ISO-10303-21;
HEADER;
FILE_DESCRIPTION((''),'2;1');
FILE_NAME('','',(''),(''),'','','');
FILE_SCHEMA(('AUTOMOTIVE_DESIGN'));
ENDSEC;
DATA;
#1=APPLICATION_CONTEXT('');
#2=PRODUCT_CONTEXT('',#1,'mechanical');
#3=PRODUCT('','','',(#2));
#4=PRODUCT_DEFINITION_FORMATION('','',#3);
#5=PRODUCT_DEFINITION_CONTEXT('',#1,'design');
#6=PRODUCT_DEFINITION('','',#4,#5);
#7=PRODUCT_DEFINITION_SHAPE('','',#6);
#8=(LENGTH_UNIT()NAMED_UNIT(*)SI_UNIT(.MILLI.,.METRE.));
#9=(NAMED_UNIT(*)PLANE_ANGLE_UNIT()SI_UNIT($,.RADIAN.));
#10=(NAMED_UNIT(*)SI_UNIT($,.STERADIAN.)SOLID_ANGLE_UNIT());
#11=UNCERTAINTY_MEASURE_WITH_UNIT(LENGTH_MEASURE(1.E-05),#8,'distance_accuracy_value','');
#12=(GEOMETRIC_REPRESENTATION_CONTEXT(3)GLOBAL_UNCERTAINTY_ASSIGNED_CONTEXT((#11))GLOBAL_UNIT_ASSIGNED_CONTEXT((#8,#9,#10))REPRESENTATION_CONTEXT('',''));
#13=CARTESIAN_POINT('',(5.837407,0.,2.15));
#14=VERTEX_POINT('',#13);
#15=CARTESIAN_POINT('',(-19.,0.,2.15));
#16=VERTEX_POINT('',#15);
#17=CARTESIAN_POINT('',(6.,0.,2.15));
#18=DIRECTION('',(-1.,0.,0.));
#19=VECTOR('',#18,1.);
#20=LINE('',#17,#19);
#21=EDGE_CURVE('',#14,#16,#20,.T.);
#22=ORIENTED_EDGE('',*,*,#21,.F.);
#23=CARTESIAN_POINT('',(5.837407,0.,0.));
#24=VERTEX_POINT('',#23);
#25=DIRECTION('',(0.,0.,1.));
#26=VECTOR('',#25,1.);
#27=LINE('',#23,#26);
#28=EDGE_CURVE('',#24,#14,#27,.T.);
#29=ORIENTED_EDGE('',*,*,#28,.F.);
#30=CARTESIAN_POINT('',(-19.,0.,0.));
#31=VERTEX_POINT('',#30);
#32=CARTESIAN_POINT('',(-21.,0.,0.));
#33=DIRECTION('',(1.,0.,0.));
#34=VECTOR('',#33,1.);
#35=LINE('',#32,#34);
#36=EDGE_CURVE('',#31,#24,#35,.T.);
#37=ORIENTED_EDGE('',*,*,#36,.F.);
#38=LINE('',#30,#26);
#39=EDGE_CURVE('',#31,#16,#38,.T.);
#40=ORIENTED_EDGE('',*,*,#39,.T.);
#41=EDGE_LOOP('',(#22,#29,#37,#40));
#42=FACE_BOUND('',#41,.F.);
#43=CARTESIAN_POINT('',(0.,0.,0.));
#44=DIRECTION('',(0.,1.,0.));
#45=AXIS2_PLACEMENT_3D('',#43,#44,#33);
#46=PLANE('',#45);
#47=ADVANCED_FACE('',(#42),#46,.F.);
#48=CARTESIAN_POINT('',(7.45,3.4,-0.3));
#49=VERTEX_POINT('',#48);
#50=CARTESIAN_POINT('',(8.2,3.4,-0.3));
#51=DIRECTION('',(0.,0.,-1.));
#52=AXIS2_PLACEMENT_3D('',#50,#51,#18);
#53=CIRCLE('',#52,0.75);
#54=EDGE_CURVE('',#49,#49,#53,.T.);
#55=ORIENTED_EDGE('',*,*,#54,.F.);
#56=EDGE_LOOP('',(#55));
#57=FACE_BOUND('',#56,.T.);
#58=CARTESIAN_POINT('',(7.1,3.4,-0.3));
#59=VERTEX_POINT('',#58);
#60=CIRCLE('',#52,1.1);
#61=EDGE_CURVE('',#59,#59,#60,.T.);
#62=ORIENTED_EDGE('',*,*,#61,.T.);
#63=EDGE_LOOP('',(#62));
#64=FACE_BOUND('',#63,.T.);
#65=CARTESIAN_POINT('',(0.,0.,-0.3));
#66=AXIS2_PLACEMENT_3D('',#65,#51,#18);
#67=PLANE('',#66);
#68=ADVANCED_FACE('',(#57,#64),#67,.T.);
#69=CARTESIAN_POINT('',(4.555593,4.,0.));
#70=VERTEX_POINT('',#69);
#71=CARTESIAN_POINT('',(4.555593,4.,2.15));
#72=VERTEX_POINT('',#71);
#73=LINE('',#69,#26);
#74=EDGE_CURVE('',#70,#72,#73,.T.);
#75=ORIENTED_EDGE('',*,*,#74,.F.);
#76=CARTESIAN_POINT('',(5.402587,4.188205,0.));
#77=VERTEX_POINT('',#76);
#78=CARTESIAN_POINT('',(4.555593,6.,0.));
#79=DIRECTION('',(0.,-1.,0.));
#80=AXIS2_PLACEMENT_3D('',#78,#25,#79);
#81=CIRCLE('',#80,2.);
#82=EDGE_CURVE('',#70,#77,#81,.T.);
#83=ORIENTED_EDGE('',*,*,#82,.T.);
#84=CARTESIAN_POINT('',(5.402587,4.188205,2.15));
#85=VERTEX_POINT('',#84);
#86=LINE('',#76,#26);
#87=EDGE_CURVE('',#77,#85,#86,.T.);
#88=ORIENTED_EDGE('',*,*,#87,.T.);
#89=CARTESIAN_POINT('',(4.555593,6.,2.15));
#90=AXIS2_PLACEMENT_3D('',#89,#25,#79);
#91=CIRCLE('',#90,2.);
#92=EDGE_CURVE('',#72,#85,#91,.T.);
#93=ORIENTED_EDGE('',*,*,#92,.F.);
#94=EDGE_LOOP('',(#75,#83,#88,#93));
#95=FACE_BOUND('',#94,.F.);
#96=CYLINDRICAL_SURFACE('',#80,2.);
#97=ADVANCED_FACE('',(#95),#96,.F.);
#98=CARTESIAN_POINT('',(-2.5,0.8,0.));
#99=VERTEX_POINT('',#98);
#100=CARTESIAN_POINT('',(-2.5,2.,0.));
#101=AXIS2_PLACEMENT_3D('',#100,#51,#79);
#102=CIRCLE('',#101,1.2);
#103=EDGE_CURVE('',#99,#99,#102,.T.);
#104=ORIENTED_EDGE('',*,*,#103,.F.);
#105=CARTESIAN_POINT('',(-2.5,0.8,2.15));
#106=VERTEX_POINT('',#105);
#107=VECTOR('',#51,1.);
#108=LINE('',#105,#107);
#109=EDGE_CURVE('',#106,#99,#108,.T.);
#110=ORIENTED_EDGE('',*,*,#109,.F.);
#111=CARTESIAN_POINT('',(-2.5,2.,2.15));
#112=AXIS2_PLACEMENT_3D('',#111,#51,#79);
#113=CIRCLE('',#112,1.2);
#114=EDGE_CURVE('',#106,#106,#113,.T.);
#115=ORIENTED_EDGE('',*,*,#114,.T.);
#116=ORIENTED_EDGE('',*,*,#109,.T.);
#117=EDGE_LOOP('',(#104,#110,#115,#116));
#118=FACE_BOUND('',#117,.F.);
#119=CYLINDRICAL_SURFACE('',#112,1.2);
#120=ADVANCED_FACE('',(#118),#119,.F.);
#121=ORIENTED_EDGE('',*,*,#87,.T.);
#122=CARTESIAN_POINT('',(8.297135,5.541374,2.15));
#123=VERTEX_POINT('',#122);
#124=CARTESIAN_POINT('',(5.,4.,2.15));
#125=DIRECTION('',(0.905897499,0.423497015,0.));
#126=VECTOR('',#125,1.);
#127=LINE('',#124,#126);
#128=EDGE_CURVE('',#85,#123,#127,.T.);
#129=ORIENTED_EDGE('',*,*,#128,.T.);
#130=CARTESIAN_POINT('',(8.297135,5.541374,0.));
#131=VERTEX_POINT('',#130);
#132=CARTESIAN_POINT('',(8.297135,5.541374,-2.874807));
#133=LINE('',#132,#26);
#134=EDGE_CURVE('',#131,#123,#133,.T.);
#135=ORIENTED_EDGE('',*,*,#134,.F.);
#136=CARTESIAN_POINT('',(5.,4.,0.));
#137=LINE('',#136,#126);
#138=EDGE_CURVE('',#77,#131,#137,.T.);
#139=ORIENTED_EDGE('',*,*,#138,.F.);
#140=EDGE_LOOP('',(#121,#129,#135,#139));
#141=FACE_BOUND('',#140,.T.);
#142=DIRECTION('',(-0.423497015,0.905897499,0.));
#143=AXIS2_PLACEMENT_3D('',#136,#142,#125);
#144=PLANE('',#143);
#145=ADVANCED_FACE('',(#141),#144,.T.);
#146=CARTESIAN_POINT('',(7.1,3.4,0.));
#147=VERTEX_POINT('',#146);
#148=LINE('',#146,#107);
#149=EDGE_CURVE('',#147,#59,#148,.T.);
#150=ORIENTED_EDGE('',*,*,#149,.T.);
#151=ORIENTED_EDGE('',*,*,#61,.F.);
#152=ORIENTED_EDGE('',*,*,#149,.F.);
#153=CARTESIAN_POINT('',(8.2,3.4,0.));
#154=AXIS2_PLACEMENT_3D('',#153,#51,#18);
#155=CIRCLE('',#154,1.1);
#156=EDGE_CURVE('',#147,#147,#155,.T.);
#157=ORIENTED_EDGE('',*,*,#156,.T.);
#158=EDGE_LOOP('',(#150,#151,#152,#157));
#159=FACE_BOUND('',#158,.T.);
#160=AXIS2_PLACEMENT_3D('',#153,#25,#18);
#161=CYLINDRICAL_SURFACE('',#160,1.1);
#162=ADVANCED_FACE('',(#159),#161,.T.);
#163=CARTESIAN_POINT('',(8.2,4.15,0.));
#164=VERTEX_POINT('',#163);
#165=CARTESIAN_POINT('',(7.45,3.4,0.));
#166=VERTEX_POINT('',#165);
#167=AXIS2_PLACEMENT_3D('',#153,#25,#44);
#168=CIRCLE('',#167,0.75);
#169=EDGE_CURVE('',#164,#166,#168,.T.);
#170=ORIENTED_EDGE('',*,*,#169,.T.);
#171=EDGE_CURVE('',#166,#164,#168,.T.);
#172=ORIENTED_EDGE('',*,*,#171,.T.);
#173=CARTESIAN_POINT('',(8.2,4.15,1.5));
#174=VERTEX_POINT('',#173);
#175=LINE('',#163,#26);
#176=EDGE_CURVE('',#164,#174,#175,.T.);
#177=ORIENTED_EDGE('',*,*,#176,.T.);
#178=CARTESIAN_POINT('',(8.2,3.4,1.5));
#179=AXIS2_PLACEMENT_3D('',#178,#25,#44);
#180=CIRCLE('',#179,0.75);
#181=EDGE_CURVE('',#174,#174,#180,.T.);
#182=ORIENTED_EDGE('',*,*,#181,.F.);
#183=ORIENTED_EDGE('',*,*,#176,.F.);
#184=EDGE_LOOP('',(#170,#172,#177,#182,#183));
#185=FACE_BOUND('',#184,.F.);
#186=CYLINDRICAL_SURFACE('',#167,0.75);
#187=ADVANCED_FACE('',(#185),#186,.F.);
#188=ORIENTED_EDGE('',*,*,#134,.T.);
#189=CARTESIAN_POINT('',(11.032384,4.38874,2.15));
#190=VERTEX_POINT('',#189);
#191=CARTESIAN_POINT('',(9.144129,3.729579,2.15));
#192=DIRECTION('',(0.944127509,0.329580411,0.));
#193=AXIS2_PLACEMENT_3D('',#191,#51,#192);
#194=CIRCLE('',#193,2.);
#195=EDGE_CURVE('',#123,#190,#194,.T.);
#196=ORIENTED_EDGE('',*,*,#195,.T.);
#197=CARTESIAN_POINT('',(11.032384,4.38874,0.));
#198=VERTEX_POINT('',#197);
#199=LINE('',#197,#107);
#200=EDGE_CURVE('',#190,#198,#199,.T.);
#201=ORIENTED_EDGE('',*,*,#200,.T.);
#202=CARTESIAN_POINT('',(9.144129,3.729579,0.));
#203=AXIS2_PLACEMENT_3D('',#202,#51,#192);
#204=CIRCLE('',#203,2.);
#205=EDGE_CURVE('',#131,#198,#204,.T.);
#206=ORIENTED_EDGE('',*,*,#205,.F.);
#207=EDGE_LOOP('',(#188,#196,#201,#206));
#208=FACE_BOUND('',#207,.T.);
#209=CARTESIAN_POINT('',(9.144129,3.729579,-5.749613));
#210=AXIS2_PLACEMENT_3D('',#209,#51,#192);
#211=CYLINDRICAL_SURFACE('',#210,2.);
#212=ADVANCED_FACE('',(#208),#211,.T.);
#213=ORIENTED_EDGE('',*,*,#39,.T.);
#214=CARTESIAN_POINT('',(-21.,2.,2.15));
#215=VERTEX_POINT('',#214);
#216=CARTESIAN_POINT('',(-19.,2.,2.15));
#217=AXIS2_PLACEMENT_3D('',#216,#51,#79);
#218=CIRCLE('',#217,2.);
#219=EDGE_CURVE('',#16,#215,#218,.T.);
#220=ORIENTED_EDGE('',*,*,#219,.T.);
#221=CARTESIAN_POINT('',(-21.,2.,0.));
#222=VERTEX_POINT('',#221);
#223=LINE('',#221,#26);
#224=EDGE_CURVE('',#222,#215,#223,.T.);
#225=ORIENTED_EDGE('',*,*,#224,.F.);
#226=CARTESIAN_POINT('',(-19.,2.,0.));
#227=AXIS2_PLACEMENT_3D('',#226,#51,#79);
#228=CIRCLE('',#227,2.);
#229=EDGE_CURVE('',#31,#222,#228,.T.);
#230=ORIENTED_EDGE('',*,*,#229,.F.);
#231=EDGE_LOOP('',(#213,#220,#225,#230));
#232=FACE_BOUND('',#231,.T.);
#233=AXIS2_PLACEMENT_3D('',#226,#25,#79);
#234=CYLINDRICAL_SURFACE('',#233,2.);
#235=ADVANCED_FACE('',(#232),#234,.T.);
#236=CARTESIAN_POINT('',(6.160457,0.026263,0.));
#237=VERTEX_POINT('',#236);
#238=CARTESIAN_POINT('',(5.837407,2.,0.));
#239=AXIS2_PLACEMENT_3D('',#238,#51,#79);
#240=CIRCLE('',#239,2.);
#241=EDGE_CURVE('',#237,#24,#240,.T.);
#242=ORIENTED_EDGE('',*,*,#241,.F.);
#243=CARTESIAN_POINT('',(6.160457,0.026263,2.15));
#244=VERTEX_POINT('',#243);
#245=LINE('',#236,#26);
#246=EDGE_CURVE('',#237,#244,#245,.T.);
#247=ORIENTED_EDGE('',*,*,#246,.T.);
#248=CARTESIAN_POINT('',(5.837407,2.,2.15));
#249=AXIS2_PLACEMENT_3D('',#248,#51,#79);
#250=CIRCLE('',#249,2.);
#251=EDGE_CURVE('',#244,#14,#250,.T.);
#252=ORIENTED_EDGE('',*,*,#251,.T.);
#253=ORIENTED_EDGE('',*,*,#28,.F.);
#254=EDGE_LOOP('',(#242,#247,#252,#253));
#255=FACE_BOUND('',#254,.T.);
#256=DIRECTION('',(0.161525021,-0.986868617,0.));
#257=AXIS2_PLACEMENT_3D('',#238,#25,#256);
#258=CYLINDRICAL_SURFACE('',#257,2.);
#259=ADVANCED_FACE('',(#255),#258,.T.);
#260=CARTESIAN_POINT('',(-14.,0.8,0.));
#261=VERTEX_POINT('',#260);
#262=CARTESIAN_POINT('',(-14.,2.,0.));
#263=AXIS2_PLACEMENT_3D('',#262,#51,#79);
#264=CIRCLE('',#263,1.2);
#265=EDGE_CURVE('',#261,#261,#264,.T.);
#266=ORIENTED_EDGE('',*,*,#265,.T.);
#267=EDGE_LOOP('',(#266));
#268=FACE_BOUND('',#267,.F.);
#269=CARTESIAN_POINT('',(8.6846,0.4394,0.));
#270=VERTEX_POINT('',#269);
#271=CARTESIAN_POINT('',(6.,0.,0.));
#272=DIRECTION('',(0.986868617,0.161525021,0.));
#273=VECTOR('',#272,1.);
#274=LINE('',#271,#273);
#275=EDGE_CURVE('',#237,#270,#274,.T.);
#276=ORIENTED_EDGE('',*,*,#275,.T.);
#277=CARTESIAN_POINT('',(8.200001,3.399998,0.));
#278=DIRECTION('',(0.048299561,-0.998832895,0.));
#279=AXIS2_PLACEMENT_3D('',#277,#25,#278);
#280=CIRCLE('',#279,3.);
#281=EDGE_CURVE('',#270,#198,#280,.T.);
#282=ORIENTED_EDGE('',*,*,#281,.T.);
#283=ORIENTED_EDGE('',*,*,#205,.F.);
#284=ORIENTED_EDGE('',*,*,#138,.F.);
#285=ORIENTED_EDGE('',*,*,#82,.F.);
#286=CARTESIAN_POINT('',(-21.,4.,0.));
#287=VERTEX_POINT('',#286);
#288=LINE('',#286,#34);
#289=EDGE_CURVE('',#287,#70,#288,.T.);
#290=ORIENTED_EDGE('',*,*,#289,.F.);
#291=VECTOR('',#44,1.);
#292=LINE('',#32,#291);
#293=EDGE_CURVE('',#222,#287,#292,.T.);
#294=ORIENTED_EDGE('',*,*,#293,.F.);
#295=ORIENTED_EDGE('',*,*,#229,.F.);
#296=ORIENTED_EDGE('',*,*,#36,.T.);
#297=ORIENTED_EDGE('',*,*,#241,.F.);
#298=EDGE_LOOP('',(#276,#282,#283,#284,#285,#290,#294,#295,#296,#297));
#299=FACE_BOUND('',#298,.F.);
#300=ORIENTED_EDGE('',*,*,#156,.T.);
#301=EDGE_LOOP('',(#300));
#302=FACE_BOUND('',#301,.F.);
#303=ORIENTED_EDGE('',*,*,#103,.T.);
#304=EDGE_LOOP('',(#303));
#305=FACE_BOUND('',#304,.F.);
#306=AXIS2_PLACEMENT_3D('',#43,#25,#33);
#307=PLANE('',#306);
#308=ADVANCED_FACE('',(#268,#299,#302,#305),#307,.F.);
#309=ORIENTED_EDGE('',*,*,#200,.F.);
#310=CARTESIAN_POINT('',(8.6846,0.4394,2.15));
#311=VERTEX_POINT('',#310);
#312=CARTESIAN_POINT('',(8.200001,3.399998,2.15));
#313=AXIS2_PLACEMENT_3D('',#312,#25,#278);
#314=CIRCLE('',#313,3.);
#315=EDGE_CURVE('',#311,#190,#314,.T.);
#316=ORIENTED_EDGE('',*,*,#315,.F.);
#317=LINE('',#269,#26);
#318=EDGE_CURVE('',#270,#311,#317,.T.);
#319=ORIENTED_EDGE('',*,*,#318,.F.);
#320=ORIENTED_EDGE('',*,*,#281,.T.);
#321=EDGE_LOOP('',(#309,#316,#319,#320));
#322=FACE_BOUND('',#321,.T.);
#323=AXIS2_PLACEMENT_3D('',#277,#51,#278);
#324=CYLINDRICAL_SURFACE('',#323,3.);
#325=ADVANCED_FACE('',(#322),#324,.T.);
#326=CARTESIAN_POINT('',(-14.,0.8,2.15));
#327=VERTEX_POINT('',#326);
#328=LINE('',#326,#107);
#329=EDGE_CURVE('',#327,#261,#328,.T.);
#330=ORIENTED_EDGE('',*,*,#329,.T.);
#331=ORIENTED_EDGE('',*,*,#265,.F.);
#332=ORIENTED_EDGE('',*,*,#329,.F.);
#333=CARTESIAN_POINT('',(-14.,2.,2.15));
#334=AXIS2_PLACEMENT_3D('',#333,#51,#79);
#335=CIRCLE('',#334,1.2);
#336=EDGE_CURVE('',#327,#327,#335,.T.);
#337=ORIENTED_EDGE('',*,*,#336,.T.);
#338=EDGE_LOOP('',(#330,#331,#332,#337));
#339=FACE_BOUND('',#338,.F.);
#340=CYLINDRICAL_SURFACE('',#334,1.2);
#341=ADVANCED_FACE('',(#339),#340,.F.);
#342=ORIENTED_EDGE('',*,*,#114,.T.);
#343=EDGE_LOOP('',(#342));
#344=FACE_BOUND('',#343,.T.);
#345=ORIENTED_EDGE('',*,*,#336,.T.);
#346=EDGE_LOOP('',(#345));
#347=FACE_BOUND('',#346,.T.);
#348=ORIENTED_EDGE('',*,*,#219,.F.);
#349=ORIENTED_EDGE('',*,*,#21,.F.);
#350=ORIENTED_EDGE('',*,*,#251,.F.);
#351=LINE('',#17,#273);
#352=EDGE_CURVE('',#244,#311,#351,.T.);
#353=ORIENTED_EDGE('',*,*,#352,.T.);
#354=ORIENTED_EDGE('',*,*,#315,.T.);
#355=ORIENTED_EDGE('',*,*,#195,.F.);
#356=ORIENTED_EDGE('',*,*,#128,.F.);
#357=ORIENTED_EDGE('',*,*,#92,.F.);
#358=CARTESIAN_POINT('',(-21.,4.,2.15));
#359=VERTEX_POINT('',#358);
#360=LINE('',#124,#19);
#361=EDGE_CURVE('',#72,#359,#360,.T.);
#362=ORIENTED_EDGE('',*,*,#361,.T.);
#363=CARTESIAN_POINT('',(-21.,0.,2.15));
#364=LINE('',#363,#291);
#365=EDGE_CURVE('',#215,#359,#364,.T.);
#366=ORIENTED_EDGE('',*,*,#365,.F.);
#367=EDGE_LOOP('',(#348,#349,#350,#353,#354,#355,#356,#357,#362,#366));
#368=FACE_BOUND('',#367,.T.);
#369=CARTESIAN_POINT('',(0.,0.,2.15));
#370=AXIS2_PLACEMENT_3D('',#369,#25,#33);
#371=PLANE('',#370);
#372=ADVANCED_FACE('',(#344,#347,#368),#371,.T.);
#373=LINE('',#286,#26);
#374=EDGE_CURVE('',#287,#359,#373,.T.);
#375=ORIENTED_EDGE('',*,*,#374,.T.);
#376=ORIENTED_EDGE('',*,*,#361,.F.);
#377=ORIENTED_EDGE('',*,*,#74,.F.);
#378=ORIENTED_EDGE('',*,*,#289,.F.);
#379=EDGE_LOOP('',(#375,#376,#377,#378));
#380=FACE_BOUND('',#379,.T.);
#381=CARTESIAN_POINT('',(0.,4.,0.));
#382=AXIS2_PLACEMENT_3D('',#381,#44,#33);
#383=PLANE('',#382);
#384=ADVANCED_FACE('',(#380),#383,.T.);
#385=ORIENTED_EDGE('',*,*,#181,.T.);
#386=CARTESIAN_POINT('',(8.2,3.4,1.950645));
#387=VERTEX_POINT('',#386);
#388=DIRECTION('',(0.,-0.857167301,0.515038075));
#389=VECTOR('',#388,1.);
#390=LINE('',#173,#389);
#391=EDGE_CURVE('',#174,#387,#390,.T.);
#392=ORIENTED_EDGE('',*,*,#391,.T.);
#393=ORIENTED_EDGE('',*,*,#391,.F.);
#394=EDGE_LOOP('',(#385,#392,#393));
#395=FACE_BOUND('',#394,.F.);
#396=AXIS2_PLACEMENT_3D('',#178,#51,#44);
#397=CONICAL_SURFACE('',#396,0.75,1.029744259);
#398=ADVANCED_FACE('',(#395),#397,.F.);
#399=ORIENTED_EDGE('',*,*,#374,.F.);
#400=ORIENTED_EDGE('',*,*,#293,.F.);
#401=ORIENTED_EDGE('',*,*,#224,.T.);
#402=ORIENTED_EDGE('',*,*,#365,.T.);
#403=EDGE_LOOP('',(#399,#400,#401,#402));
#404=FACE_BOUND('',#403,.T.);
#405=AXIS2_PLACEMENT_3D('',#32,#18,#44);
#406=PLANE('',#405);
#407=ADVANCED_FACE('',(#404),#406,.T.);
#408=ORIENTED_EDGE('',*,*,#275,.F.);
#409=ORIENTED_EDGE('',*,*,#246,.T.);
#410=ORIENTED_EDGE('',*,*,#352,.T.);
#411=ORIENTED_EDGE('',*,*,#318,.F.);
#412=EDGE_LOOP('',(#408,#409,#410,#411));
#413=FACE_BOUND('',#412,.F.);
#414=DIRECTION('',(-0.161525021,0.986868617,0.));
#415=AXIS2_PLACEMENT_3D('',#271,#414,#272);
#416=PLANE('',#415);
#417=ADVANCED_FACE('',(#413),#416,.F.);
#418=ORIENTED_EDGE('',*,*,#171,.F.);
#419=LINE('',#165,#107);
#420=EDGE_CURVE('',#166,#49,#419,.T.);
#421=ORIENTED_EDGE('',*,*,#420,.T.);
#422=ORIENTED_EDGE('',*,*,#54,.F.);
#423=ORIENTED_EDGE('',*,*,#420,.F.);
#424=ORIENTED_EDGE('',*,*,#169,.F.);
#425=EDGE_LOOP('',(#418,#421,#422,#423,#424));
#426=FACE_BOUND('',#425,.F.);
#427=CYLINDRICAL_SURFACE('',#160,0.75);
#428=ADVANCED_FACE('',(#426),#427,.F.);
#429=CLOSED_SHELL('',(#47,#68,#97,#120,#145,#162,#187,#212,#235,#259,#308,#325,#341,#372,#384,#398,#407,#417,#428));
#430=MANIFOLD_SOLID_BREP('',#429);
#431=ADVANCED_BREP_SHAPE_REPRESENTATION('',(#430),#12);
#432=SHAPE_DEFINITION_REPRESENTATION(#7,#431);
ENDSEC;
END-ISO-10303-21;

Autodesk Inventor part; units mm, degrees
ref_plane "YZ Plane" through (0, 0, 0) normal (1, 0, 0) x (0, 1, 0)
ref_plane "XZ Plane" through (0, 0, 0) normal (0, 1, 0) x (-1, 0, 0)
ref_plane "XY Plane" through (0, 0, 0) normal (0, 0, 1) x (1, 0, 0)
sketch "Sketch1" plane through (0, 0, 0) normal (0, 0, 1) x (1, 0, 0)
  line L0 (0, 4) -> (0, 0) construction
  arc A0 (8.3449, 0.4035) -> (9.5, 6.1037) centre (8.2, 3.4) ccw
  line L1 (0, 0) -> (-21, 0)
  line L2 (-21, 0) -> (-21, 4)
  line L3 (0, 4) -> (0, 0)
  line L4 (-21, 4) -> (0, 4)
  line L5 (0, 4) -> (5, 4)
  line L6 (5, 4) -> (9.5, 6.1037)
  line L7 (0, 0) -> (6, 0)
  line L8 (6, 0) -> (8.6846, 0.4394)
  dimension "d0" = 8.2
  dimension "d1" = 3.4
  dimension "d3" = 6
  dimension "d47" = 21
  dimension "d57" = 4
  dimension "d66" = 5
  dimension "d67" = 9.5
  dimension "d68" = 6
extrude "Extrusion1" add sketch "Sketch1" along normal blind 2.15
sketch "Sketch6" plane through (0, 0, 0) normal (0, 0, -1) x (-1, 0, 0)
  arc A0 (-9.5, 6.1037) -> (-8.6846, 0.4394) centre (-8.2, 3.4) ccw projected
  point P0 (0, 0)
  point P1 (-3.5529, 0.4208)
  point P2 (-8.8532, 6.2809)
  point P3 (-10.6507, 0.558)
hole "Hole3" at (8.2, 3.4, 0) direction (0, 0, 1) diameter 1.5 depth 1.5 tip angle 118
sketch "Sketch7" plane through (0, 0, 0) normal (0, 0, -1) x (-1, 0, 0)
  circle A0 centre (-8.2, 3.4) radius 0.75 projected
  circle A1 centre (-8.2, 3.4) radius 1.1
  point P0 (0, 0)
  dimension "d44" = 2.2
extrude "Extrusion4" add sketch "Sketch7" along normal blind 0.3
sketch "Sketch8" plane through (0, 0, 2.15) normal (0, 0, 1) x (1, 0, 0)
  arc A0 (8.6846, 0.4394) -> (9.5, 6.1037) centre (8.2, 3.4) ccw projected
  line L0 (-21, 4) -> (-21, 0) projected
  line L1 (-21, 4) -> (-21, 0) projected
  line L2 (-21, 2) -> (-1.49, 2) construction
  line L3 (5, 4) -> (-21, 4) projected
  line L4 (-21, 0) -> (6, 0) projected
  line L5 (6, 0) -> (8.6846, 0.4394) projected
  line L6 (9.5, 6.1037) -> (5, 4) projected
  point P0 (0, 0)
  point P1 (-14, 2)
  point P2 (-2.5, 2)
  dimension "d48" = 7
  dimension "d49" = 2.5
hole "Hole4" at (-14, 2, 2.15) at (-2.5, 2, 2.15) direction (0, 0, -1) diameter 2.4 end through all
fillet "Fillet3" radius 2 1 edges at (9.5, 6.1037, 1.075)
fillet "Fillet5" radius 2 2 edges at (5, 4, 1.075) (6, 0, 1.075)
fillet "Fillet6" radius 2 1 edges at (-21, 0, 1.075)
properties part number "phalanx_1_tendon_support" material "Aluminum 6061"
